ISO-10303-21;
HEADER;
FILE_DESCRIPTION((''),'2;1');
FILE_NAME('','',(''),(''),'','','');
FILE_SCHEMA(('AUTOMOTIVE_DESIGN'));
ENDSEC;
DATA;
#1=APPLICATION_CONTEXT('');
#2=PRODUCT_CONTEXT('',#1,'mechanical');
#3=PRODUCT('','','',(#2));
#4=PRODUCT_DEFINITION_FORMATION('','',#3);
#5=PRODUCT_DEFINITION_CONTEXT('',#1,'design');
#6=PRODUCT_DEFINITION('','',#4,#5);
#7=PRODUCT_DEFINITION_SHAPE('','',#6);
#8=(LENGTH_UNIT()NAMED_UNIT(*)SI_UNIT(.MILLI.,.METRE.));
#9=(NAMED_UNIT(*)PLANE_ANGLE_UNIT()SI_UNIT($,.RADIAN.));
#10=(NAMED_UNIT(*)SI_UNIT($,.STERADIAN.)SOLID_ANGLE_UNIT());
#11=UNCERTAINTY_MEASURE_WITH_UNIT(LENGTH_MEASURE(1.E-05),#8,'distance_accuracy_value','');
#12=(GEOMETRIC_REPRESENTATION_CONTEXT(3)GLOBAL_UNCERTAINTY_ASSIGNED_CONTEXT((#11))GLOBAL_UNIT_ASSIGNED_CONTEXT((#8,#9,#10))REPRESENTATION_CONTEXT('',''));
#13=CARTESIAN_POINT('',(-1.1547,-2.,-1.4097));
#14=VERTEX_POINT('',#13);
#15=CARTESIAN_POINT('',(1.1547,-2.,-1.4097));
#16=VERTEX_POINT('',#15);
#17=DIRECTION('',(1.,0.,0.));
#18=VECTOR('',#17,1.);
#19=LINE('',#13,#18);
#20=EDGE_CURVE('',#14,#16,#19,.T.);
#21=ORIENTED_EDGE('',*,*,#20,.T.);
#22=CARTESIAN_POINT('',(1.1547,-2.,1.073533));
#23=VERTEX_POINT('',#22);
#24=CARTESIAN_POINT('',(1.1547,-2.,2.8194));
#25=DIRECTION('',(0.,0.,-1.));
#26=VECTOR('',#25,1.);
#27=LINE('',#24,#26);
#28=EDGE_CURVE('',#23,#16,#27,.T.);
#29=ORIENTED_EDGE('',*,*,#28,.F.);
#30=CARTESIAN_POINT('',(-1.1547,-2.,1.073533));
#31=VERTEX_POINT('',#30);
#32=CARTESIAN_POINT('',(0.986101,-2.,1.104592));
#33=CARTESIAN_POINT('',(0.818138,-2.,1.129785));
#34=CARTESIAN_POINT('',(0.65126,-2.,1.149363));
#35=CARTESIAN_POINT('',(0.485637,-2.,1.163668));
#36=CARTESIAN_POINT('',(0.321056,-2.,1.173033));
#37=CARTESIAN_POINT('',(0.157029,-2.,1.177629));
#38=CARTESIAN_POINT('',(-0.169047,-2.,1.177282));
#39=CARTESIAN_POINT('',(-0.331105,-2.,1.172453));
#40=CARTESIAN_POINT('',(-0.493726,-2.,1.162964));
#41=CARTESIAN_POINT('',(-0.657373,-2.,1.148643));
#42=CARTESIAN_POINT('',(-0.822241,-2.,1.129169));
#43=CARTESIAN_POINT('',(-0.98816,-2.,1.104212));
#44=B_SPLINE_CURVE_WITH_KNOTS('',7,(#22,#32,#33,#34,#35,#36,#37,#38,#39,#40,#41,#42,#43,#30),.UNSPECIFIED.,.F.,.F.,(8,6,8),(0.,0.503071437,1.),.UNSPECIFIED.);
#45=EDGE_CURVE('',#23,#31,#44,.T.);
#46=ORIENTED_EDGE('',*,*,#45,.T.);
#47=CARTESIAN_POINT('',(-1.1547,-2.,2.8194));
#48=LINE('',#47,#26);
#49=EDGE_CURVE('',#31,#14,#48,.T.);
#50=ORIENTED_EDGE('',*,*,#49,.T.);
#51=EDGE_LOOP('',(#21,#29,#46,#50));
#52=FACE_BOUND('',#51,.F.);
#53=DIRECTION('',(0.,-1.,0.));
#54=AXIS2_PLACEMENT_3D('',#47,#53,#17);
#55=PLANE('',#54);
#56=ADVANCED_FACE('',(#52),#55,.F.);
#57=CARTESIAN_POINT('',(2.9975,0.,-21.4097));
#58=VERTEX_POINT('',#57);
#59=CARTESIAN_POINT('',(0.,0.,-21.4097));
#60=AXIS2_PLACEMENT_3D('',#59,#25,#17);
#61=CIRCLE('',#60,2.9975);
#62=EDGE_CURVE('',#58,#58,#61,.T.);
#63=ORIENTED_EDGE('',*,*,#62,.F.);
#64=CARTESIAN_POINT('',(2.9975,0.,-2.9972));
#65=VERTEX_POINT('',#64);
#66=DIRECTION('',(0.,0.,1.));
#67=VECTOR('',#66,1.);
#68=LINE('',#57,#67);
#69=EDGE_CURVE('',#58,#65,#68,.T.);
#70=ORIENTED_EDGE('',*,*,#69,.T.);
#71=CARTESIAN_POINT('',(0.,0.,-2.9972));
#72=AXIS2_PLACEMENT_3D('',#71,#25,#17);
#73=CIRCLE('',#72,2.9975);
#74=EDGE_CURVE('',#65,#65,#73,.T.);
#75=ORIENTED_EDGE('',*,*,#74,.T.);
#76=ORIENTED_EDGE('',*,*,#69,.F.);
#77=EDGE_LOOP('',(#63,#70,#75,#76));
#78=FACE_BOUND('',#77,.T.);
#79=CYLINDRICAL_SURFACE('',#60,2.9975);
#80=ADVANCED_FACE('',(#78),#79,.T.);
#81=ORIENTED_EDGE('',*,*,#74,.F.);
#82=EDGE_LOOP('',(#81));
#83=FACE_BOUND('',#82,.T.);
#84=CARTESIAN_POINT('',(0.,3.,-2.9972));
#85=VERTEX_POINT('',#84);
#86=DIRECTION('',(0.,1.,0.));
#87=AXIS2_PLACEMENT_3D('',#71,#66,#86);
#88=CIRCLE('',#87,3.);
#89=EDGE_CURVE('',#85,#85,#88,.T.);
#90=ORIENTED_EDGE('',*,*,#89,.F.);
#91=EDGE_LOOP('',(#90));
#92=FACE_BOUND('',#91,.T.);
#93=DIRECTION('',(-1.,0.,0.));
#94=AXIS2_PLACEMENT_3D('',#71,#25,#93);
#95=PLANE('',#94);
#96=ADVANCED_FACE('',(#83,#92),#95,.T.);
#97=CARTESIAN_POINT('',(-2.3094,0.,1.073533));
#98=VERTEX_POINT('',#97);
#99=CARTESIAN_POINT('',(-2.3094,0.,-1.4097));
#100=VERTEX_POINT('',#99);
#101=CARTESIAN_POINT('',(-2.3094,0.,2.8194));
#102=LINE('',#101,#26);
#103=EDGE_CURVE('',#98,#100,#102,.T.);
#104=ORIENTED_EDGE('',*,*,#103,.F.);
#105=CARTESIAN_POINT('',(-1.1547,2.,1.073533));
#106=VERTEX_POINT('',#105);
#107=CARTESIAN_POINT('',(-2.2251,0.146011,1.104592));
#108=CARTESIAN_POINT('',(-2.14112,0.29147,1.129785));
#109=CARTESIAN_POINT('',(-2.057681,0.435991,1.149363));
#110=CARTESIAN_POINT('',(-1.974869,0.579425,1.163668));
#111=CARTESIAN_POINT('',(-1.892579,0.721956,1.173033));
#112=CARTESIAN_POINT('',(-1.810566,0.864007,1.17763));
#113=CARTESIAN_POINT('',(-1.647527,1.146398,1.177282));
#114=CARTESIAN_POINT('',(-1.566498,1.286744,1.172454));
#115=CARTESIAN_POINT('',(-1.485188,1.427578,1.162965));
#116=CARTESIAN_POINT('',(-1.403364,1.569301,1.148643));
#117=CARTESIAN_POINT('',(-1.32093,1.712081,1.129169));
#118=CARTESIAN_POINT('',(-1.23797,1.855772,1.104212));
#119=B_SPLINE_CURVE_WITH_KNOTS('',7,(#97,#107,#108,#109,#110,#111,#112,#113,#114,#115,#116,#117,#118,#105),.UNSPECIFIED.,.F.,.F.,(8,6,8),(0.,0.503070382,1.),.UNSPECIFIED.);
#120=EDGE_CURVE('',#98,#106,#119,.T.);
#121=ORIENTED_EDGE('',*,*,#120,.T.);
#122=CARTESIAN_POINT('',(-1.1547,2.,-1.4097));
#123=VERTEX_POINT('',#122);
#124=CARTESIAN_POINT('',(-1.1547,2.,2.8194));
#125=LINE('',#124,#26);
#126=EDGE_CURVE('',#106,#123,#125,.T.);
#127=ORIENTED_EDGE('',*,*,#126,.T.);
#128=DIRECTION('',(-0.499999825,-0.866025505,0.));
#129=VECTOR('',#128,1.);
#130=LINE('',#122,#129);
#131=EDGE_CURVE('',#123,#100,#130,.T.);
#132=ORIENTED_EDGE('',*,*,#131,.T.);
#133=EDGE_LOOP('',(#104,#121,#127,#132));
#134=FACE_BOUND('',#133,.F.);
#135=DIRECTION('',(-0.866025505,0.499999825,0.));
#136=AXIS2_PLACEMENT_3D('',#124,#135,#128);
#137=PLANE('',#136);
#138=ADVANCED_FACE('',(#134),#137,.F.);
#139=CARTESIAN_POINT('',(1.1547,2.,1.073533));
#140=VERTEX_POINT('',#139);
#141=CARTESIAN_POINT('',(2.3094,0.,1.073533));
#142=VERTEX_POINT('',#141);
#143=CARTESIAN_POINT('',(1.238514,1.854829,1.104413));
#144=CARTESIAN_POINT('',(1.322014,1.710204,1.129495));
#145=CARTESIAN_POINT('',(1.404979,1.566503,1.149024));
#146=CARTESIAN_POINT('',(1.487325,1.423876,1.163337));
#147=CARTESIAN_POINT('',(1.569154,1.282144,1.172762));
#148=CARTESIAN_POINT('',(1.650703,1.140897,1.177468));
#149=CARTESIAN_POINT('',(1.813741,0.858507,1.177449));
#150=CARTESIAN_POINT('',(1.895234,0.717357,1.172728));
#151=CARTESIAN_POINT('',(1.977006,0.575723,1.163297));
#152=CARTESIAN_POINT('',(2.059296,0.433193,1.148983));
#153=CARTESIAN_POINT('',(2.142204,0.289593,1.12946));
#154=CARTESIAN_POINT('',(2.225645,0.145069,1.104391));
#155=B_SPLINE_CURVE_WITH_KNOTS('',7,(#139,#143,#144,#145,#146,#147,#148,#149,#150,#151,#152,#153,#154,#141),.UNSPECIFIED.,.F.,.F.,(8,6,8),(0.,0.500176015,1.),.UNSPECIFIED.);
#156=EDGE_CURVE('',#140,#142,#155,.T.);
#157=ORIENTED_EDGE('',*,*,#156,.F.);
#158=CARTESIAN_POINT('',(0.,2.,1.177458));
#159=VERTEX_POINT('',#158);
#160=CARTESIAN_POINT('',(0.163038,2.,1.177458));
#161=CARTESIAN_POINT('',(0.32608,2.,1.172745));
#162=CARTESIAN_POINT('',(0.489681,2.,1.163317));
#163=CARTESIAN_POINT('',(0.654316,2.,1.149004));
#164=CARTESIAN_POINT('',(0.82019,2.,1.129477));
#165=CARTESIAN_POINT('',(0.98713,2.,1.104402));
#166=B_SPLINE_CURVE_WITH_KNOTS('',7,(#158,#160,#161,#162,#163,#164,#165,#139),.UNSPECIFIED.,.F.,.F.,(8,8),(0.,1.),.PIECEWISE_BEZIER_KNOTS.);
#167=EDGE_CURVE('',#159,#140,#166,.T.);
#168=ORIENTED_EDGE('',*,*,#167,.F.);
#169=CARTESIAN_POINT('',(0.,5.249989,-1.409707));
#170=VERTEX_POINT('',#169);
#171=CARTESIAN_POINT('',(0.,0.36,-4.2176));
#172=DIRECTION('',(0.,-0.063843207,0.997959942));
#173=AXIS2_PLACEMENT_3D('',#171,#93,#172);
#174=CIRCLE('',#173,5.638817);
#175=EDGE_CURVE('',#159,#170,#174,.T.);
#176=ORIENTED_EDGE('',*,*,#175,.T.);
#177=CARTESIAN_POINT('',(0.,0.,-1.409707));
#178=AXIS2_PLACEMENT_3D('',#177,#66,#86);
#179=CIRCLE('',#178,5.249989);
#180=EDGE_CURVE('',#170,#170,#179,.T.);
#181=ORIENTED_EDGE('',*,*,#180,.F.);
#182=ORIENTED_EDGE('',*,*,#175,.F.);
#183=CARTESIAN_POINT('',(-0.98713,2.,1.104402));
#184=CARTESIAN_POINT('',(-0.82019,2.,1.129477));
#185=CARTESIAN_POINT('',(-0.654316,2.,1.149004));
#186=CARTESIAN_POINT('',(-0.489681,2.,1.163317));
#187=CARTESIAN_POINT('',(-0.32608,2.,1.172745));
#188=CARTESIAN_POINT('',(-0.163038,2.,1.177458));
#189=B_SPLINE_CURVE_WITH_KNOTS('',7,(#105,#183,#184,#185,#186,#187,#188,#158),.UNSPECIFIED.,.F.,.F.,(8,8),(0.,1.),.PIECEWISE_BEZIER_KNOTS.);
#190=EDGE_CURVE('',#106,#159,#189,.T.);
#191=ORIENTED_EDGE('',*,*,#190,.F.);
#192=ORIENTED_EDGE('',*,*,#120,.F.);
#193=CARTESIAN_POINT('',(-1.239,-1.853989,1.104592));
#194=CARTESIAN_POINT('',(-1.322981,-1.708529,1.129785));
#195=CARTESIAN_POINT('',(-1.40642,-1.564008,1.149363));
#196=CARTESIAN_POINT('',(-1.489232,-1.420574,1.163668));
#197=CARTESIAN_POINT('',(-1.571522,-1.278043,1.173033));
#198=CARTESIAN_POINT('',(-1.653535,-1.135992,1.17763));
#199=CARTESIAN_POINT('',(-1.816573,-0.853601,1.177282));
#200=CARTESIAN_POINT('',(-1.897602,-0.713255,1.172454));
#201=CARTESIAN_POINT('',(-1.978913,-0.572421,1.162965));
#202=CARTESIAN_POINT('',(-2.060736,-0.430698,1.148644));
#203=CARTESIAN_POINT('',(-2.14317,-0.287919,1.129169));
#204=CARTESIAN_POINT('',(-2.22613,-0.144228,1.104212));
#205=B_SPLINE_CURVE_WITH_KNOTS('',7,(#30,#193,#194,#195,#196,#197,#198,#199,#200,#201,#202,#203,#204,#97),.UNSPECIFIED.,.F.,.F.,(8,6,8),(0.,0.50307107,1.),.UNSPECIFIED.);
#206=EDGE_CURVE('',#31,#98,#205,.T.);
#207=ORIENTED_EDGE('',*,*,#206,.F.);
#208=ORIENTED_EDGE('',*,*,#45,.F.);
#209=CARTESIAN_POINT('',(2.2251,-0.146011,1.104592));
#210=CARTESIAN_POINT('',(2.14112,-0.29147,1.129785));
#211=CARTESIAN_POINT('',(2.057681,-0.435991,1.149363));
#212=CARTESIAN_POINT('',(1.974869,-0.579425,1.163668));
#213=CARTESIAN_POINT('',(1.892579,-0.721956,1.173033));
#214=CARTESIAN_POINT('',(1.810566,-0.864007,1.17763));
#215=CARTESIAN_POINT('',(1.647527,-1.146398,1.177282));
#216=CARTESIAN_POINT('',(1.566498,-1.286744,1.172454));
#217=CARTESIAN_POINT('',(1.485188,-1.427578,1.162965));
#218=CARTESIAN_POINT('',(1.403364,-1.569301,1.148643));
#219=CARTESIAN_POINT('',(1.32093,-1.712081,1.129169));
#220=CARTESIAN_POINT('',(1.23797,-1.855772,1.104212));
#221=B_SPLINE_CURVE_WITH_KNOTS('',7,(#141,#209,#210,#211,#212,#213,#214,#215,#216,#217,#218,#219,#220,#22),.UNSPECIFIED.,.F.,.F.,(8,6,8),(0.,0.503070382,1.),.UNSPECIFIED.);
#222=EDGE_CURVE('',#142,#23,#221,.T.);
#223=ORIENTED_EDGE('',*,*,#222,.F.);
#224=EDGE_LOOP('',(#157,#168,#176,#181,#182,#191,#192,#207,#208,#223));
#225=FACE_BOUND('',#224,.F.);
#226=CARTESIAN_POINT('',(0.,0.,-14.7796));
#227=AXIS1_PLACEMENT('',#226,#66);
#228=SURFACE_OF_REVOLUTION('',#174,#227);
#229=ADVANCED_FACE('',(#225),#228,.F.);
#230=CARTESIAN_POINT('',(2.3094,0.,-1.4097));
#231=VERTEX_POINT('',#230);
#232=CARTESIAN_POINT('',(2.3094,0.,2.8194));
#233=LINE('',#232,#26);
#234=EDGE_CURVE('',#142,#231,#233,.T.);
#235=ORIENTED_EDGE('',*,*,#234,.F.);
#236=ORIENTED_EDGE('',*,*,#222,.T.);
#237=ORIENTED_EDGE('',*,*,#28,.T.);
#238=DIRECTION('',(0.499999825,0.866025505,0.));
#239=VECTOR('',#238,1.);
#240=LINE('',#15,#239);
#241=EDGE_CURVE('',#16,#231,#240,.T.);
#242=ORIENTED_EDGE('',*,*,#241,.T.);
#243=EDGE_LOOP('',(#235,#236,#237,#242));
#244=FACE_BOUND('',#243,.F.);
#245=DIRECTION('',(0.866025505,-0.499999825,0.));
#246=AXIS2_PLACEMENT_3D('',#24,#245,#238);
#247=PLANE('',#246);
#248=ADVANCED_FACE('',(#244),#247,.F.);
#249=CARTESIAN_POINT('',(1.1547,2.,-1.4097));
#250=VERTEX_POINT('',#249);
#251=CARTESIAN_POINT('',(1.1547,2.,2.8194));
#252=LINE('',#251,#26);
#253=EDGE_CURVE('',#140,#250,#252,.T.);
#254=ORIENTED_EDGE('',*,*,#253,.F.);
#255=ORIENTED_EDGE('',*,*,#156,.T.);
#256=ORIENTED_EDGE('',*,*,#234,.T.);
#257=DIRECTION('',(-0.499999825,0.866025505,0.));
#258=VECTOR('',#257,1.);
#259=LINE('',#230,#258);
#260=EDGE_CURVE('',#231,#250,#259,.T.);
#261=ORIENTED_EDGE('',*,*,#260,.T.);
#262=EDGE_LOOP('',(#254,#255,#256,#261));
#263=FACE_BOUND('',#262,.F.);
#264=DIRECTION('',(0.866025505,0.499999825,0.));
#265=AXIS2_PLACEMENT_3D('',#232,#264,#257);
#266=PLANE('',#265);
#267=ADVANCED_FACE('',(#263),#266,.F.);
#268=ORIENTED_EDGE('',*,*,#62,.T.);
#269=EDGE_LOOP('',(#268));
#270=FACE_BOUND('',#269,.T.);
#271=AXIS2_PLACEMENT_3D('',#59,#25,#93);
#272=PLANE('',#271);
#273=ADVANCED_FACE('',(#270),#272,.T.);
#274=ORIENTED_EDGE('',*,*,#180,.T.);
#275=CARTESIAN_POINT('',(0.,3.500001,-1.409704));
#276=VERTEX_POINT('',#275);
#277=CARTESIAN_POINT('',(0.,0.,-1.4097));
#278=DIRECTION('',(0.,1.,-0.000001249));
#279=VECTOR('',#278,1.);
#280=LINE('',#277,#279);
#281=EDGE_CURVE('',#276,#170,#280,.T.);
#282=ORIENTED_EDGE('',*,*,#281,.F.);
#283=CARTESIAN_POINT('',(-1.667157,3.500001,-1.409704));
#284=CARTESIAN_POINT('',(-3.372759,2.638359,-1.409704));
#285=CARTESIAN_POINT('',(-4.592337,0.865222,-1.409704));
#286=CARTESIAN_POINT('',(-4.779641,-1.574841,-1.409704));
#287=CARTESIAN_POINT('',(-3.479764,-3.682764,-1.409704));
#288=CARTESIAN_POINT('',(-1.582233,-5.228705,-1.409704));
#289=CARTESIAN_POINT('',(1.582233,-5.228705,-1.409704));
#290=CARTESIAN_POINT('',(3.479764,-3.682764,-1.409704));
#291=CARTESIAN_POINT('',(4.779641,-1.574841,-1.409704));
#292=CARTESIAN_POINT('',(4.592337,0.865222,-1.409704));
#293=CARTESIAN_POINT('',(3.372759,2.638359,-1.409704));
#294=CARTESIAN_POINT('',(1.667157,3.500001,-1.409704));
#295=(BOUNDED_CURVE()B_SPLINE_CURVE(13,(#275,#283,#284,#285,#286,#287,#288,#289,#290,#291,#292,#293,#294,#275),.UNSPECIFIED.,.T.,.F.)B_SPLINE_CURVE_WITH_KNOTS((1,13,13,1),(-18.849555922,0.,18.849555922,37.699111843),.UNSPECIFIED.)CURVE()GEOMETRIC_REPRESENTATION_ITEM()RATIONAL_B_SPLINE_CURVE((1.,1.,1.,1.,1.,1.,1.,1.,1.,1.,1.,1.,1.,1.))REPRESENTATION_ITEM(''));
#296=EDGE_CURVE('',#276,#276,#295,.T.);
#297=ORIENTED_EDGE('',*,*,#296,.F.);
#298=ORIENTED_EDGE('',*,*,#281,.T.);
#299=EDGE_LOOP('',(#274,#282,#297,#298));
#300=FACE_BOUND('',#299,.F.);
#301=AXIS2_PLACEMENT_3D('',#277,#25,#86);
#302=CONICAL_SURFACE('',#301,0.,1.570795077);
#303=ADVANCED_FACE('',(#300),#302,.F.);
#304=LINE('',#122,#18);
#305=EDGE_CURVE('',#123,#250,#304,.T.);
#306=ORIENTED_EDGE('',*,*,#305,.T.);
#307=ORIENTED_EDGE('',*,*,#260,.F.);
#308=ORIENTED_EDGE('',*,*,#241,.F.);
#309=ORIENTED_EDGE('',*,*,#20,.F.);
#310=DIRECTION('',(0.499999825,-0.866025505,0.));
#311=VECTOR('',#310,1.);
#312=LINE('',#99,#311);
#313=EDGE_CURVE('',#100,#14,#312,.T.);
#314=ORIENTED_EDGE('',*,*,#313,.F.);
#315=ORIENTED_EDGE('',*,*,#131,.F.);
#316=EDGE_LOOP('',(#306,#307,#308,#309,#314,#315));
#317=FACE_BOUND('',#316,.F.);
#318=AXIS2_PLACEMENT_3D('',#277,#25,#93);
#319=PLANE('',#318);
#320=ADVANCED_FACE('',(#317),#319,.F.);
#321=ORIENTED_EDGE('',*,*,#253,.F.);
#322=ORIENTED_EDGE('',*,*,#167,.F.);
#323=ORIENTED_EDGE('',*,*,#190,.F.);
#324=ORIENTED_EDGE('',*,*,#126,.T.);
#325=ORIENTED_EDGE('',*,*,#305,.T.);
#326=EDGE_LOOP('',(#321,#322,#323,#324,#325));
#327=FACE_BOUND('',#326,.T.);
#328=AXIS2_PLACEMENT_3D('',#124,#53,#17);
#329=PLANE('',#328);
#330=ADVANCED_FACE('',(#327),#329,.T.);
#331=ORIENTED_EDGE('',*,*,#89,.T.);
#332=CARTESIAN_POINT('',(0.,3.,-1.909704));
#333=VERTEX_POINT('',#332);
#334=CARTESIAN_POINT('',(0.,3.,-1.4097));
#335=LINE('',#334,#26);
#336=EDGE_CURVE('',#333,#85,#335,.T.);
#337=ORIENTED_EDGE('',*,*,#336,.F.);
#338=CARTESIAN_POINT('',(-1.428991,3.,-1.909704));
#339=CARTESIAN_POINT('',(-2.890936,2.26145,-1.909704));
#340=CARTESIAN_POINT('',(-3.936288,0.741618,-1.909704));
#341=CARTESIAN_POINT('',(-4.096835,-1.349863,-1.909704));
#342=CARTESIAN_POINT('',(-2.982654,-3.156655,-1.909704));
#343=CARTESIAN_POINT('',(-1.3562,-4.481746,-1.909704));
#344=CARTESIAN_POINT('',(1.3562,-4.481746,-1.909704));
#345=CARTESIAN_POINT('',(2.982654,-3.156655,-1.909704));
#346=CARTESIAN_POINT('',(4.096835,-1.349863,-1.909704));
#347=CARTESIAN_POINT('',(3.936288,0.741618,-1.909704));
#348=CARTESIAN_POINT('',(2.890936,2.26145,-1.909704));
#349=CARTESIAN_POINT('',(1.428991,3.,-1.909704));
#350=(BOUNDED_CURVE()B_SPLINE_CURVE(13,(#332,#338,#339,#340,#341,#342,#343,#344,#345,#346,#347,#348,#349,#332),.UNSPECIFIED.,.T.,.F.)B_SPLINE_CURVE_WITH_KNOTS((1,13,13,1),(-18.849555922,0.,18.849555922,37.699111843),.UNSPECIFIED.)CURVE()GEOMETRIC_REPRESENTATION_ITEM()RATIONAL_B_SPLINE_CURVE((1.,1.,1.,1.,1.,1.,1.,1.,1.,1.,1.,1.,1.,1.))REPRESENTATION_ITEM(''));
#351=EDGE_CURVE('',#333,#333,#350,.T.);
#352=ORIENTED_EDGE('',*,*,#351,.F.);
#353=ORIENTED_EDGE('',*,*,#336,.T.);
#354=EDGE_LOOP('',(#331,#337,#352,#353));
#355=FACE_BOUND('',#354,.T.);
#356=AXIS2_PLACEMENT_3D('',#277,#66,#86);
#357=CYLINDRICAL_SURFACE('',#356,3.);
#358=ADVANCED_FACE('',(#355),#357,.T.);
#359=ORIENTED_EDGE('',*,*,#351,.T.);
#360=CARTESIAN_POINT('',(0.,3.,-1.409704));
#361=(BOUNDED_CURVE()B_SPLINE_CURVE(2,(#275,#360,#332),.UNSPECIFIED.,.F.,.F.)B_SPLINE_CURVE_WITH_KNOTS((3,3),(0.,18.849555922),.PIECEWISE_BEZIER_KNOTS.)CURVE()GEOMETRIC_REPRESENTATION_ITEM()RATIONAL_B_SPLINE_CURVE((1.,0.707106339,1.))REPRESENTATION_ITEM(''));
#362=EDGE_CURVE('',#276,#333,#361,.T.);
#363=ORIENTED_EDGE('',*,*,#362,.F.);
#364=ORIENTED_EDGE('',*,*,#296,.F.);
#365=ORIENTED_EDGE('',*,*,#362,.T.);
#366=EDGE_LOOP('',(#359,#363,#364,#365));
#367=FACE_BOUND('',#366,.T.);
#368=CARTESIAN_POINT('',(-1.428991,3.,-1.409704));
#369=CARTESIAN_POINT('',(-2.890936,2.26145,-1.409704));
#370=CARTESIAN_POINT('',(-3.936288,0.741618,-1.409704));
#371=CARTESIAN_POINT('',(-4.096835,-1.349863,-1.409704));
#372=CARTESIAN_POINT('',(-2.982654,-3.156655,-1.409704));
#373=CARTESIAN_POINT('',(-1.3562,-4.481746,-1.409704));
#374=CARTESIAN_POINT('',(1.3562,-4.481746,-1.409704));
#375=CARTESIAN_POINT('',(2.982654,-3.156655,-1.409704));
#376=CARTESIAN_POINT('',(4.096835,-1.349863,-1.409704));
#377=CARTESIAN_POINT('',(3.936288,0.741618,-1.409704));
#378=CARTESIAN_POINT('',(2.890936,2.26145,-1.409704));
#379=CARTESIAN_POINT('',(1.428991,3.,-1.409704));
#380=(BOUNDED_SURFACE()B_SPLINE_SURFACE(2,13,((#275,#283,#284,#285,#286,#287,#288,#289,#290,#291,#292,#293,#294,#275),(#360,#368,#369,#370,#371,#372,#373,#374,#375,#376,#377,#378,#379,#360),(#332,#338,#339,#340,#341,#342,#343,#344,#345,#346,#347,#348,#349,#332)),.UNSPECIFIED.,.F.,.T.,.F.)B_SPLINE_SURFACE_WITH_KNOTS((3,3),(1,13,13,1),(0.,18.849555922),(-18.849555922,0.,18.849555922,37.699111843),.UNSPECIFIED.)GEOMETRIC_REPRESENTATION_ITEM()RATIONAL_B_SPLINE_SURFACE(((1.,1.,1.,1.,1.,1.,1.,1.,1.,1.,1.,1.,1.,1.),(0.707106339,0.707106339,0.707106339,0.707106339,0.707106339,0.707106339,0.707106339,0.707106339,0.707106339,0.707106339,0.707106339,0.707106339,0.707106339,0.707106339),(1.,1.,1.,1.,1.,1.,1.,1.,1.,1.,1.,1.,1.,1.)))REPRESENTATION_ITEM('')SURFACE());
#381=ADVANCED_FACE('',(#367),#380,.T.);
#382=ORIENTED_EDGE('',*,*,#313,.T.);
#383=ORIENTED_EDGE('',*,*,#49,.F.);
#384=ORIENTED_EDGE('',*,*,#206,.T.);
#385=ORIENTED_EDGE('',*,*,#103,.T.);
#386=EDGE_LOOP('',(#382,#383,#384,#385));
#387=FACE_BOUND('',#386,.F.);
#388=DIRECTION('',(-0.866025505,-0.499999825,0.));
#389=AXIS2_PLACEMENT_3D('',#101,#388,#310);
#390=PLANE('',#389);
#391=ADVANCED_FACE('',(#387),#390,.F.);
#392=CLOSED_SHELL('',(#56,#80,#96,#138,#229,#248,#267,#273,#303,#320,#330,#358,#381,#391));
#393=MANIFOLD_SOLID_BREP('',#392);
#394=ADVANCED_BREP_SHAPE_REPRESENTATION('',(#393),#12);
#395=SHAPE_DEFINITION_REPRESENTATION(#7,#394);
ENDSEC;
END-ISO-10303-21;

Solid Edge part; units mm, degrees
sketch "Sketch1" plane through (0, 0, 0) normal (1, 0, 0) x (0, 1, 0)
  line L0 (0, -1.4097) -> (0, 1.4097)
  arc A0 (0, 1.4097) -> (5.25, -1.4097) centre (0.36, -4.2176) cw
  line L1 (0, -1.4097) -> (5.25, -1.4097)
  dimension "D1" = 2.8194
  dimension "D2" = 5.6388
revolve "RevolvedProtrusion1" add sketch "Sketch1" angle 360 about axis through (0, 0, -14.7796) along (0, 0, 1)
sketch "Sketch2" plane through (0, 0, -1.4097) normal (0, 0, -1) x (0, 1, 0)
  circle A0 centre (0, 0) radius 3
  dimension "D1" = 6
extrude "Protrusion1" add sketch "Sketch2" along normal blind 20
sketch "Sketch3" plane through (0, 0, -21.4097) normal (0, 0, -1) x (1, 0, 0)
  circle A0 centre (0, 0) radius 2.9975
  dimension "D1" = 0.0025
extrude "Cutout1" cut sketch "Sketch3" against normal blind 18.4125 flip side to cut
sketch "Sketch4" plane through (-0.6032, 0.3606, 2.8194) normal (0, 0, 1) x (1, 0, 0)
  line L0 (-0.5515, 1.6394) -> (1.7579, 1.6394)
  line L1 (2.9126, -0.3606) -> (1.7579, 1.6394)
  line L2 (1.7579, -2.3606) -> (2.9126, -0.3606)
  line L3 (-0.5515, -2.3606) -> (1.7579, -2.3606)
  line L4 (-1.7062, -0.3606) -> (-0.5515, -2.3606)
  line L5 (-0.5515, 1.6394) -> (-1.7062, -0.3606)
extrude "ExtrudedCutout_11" cut sketch "Sketch4" against normal blind 4.2291
fillet "Round_3" radius 0.5 1 edges at (3, 0, -1.4097)
properties part number "182126"
